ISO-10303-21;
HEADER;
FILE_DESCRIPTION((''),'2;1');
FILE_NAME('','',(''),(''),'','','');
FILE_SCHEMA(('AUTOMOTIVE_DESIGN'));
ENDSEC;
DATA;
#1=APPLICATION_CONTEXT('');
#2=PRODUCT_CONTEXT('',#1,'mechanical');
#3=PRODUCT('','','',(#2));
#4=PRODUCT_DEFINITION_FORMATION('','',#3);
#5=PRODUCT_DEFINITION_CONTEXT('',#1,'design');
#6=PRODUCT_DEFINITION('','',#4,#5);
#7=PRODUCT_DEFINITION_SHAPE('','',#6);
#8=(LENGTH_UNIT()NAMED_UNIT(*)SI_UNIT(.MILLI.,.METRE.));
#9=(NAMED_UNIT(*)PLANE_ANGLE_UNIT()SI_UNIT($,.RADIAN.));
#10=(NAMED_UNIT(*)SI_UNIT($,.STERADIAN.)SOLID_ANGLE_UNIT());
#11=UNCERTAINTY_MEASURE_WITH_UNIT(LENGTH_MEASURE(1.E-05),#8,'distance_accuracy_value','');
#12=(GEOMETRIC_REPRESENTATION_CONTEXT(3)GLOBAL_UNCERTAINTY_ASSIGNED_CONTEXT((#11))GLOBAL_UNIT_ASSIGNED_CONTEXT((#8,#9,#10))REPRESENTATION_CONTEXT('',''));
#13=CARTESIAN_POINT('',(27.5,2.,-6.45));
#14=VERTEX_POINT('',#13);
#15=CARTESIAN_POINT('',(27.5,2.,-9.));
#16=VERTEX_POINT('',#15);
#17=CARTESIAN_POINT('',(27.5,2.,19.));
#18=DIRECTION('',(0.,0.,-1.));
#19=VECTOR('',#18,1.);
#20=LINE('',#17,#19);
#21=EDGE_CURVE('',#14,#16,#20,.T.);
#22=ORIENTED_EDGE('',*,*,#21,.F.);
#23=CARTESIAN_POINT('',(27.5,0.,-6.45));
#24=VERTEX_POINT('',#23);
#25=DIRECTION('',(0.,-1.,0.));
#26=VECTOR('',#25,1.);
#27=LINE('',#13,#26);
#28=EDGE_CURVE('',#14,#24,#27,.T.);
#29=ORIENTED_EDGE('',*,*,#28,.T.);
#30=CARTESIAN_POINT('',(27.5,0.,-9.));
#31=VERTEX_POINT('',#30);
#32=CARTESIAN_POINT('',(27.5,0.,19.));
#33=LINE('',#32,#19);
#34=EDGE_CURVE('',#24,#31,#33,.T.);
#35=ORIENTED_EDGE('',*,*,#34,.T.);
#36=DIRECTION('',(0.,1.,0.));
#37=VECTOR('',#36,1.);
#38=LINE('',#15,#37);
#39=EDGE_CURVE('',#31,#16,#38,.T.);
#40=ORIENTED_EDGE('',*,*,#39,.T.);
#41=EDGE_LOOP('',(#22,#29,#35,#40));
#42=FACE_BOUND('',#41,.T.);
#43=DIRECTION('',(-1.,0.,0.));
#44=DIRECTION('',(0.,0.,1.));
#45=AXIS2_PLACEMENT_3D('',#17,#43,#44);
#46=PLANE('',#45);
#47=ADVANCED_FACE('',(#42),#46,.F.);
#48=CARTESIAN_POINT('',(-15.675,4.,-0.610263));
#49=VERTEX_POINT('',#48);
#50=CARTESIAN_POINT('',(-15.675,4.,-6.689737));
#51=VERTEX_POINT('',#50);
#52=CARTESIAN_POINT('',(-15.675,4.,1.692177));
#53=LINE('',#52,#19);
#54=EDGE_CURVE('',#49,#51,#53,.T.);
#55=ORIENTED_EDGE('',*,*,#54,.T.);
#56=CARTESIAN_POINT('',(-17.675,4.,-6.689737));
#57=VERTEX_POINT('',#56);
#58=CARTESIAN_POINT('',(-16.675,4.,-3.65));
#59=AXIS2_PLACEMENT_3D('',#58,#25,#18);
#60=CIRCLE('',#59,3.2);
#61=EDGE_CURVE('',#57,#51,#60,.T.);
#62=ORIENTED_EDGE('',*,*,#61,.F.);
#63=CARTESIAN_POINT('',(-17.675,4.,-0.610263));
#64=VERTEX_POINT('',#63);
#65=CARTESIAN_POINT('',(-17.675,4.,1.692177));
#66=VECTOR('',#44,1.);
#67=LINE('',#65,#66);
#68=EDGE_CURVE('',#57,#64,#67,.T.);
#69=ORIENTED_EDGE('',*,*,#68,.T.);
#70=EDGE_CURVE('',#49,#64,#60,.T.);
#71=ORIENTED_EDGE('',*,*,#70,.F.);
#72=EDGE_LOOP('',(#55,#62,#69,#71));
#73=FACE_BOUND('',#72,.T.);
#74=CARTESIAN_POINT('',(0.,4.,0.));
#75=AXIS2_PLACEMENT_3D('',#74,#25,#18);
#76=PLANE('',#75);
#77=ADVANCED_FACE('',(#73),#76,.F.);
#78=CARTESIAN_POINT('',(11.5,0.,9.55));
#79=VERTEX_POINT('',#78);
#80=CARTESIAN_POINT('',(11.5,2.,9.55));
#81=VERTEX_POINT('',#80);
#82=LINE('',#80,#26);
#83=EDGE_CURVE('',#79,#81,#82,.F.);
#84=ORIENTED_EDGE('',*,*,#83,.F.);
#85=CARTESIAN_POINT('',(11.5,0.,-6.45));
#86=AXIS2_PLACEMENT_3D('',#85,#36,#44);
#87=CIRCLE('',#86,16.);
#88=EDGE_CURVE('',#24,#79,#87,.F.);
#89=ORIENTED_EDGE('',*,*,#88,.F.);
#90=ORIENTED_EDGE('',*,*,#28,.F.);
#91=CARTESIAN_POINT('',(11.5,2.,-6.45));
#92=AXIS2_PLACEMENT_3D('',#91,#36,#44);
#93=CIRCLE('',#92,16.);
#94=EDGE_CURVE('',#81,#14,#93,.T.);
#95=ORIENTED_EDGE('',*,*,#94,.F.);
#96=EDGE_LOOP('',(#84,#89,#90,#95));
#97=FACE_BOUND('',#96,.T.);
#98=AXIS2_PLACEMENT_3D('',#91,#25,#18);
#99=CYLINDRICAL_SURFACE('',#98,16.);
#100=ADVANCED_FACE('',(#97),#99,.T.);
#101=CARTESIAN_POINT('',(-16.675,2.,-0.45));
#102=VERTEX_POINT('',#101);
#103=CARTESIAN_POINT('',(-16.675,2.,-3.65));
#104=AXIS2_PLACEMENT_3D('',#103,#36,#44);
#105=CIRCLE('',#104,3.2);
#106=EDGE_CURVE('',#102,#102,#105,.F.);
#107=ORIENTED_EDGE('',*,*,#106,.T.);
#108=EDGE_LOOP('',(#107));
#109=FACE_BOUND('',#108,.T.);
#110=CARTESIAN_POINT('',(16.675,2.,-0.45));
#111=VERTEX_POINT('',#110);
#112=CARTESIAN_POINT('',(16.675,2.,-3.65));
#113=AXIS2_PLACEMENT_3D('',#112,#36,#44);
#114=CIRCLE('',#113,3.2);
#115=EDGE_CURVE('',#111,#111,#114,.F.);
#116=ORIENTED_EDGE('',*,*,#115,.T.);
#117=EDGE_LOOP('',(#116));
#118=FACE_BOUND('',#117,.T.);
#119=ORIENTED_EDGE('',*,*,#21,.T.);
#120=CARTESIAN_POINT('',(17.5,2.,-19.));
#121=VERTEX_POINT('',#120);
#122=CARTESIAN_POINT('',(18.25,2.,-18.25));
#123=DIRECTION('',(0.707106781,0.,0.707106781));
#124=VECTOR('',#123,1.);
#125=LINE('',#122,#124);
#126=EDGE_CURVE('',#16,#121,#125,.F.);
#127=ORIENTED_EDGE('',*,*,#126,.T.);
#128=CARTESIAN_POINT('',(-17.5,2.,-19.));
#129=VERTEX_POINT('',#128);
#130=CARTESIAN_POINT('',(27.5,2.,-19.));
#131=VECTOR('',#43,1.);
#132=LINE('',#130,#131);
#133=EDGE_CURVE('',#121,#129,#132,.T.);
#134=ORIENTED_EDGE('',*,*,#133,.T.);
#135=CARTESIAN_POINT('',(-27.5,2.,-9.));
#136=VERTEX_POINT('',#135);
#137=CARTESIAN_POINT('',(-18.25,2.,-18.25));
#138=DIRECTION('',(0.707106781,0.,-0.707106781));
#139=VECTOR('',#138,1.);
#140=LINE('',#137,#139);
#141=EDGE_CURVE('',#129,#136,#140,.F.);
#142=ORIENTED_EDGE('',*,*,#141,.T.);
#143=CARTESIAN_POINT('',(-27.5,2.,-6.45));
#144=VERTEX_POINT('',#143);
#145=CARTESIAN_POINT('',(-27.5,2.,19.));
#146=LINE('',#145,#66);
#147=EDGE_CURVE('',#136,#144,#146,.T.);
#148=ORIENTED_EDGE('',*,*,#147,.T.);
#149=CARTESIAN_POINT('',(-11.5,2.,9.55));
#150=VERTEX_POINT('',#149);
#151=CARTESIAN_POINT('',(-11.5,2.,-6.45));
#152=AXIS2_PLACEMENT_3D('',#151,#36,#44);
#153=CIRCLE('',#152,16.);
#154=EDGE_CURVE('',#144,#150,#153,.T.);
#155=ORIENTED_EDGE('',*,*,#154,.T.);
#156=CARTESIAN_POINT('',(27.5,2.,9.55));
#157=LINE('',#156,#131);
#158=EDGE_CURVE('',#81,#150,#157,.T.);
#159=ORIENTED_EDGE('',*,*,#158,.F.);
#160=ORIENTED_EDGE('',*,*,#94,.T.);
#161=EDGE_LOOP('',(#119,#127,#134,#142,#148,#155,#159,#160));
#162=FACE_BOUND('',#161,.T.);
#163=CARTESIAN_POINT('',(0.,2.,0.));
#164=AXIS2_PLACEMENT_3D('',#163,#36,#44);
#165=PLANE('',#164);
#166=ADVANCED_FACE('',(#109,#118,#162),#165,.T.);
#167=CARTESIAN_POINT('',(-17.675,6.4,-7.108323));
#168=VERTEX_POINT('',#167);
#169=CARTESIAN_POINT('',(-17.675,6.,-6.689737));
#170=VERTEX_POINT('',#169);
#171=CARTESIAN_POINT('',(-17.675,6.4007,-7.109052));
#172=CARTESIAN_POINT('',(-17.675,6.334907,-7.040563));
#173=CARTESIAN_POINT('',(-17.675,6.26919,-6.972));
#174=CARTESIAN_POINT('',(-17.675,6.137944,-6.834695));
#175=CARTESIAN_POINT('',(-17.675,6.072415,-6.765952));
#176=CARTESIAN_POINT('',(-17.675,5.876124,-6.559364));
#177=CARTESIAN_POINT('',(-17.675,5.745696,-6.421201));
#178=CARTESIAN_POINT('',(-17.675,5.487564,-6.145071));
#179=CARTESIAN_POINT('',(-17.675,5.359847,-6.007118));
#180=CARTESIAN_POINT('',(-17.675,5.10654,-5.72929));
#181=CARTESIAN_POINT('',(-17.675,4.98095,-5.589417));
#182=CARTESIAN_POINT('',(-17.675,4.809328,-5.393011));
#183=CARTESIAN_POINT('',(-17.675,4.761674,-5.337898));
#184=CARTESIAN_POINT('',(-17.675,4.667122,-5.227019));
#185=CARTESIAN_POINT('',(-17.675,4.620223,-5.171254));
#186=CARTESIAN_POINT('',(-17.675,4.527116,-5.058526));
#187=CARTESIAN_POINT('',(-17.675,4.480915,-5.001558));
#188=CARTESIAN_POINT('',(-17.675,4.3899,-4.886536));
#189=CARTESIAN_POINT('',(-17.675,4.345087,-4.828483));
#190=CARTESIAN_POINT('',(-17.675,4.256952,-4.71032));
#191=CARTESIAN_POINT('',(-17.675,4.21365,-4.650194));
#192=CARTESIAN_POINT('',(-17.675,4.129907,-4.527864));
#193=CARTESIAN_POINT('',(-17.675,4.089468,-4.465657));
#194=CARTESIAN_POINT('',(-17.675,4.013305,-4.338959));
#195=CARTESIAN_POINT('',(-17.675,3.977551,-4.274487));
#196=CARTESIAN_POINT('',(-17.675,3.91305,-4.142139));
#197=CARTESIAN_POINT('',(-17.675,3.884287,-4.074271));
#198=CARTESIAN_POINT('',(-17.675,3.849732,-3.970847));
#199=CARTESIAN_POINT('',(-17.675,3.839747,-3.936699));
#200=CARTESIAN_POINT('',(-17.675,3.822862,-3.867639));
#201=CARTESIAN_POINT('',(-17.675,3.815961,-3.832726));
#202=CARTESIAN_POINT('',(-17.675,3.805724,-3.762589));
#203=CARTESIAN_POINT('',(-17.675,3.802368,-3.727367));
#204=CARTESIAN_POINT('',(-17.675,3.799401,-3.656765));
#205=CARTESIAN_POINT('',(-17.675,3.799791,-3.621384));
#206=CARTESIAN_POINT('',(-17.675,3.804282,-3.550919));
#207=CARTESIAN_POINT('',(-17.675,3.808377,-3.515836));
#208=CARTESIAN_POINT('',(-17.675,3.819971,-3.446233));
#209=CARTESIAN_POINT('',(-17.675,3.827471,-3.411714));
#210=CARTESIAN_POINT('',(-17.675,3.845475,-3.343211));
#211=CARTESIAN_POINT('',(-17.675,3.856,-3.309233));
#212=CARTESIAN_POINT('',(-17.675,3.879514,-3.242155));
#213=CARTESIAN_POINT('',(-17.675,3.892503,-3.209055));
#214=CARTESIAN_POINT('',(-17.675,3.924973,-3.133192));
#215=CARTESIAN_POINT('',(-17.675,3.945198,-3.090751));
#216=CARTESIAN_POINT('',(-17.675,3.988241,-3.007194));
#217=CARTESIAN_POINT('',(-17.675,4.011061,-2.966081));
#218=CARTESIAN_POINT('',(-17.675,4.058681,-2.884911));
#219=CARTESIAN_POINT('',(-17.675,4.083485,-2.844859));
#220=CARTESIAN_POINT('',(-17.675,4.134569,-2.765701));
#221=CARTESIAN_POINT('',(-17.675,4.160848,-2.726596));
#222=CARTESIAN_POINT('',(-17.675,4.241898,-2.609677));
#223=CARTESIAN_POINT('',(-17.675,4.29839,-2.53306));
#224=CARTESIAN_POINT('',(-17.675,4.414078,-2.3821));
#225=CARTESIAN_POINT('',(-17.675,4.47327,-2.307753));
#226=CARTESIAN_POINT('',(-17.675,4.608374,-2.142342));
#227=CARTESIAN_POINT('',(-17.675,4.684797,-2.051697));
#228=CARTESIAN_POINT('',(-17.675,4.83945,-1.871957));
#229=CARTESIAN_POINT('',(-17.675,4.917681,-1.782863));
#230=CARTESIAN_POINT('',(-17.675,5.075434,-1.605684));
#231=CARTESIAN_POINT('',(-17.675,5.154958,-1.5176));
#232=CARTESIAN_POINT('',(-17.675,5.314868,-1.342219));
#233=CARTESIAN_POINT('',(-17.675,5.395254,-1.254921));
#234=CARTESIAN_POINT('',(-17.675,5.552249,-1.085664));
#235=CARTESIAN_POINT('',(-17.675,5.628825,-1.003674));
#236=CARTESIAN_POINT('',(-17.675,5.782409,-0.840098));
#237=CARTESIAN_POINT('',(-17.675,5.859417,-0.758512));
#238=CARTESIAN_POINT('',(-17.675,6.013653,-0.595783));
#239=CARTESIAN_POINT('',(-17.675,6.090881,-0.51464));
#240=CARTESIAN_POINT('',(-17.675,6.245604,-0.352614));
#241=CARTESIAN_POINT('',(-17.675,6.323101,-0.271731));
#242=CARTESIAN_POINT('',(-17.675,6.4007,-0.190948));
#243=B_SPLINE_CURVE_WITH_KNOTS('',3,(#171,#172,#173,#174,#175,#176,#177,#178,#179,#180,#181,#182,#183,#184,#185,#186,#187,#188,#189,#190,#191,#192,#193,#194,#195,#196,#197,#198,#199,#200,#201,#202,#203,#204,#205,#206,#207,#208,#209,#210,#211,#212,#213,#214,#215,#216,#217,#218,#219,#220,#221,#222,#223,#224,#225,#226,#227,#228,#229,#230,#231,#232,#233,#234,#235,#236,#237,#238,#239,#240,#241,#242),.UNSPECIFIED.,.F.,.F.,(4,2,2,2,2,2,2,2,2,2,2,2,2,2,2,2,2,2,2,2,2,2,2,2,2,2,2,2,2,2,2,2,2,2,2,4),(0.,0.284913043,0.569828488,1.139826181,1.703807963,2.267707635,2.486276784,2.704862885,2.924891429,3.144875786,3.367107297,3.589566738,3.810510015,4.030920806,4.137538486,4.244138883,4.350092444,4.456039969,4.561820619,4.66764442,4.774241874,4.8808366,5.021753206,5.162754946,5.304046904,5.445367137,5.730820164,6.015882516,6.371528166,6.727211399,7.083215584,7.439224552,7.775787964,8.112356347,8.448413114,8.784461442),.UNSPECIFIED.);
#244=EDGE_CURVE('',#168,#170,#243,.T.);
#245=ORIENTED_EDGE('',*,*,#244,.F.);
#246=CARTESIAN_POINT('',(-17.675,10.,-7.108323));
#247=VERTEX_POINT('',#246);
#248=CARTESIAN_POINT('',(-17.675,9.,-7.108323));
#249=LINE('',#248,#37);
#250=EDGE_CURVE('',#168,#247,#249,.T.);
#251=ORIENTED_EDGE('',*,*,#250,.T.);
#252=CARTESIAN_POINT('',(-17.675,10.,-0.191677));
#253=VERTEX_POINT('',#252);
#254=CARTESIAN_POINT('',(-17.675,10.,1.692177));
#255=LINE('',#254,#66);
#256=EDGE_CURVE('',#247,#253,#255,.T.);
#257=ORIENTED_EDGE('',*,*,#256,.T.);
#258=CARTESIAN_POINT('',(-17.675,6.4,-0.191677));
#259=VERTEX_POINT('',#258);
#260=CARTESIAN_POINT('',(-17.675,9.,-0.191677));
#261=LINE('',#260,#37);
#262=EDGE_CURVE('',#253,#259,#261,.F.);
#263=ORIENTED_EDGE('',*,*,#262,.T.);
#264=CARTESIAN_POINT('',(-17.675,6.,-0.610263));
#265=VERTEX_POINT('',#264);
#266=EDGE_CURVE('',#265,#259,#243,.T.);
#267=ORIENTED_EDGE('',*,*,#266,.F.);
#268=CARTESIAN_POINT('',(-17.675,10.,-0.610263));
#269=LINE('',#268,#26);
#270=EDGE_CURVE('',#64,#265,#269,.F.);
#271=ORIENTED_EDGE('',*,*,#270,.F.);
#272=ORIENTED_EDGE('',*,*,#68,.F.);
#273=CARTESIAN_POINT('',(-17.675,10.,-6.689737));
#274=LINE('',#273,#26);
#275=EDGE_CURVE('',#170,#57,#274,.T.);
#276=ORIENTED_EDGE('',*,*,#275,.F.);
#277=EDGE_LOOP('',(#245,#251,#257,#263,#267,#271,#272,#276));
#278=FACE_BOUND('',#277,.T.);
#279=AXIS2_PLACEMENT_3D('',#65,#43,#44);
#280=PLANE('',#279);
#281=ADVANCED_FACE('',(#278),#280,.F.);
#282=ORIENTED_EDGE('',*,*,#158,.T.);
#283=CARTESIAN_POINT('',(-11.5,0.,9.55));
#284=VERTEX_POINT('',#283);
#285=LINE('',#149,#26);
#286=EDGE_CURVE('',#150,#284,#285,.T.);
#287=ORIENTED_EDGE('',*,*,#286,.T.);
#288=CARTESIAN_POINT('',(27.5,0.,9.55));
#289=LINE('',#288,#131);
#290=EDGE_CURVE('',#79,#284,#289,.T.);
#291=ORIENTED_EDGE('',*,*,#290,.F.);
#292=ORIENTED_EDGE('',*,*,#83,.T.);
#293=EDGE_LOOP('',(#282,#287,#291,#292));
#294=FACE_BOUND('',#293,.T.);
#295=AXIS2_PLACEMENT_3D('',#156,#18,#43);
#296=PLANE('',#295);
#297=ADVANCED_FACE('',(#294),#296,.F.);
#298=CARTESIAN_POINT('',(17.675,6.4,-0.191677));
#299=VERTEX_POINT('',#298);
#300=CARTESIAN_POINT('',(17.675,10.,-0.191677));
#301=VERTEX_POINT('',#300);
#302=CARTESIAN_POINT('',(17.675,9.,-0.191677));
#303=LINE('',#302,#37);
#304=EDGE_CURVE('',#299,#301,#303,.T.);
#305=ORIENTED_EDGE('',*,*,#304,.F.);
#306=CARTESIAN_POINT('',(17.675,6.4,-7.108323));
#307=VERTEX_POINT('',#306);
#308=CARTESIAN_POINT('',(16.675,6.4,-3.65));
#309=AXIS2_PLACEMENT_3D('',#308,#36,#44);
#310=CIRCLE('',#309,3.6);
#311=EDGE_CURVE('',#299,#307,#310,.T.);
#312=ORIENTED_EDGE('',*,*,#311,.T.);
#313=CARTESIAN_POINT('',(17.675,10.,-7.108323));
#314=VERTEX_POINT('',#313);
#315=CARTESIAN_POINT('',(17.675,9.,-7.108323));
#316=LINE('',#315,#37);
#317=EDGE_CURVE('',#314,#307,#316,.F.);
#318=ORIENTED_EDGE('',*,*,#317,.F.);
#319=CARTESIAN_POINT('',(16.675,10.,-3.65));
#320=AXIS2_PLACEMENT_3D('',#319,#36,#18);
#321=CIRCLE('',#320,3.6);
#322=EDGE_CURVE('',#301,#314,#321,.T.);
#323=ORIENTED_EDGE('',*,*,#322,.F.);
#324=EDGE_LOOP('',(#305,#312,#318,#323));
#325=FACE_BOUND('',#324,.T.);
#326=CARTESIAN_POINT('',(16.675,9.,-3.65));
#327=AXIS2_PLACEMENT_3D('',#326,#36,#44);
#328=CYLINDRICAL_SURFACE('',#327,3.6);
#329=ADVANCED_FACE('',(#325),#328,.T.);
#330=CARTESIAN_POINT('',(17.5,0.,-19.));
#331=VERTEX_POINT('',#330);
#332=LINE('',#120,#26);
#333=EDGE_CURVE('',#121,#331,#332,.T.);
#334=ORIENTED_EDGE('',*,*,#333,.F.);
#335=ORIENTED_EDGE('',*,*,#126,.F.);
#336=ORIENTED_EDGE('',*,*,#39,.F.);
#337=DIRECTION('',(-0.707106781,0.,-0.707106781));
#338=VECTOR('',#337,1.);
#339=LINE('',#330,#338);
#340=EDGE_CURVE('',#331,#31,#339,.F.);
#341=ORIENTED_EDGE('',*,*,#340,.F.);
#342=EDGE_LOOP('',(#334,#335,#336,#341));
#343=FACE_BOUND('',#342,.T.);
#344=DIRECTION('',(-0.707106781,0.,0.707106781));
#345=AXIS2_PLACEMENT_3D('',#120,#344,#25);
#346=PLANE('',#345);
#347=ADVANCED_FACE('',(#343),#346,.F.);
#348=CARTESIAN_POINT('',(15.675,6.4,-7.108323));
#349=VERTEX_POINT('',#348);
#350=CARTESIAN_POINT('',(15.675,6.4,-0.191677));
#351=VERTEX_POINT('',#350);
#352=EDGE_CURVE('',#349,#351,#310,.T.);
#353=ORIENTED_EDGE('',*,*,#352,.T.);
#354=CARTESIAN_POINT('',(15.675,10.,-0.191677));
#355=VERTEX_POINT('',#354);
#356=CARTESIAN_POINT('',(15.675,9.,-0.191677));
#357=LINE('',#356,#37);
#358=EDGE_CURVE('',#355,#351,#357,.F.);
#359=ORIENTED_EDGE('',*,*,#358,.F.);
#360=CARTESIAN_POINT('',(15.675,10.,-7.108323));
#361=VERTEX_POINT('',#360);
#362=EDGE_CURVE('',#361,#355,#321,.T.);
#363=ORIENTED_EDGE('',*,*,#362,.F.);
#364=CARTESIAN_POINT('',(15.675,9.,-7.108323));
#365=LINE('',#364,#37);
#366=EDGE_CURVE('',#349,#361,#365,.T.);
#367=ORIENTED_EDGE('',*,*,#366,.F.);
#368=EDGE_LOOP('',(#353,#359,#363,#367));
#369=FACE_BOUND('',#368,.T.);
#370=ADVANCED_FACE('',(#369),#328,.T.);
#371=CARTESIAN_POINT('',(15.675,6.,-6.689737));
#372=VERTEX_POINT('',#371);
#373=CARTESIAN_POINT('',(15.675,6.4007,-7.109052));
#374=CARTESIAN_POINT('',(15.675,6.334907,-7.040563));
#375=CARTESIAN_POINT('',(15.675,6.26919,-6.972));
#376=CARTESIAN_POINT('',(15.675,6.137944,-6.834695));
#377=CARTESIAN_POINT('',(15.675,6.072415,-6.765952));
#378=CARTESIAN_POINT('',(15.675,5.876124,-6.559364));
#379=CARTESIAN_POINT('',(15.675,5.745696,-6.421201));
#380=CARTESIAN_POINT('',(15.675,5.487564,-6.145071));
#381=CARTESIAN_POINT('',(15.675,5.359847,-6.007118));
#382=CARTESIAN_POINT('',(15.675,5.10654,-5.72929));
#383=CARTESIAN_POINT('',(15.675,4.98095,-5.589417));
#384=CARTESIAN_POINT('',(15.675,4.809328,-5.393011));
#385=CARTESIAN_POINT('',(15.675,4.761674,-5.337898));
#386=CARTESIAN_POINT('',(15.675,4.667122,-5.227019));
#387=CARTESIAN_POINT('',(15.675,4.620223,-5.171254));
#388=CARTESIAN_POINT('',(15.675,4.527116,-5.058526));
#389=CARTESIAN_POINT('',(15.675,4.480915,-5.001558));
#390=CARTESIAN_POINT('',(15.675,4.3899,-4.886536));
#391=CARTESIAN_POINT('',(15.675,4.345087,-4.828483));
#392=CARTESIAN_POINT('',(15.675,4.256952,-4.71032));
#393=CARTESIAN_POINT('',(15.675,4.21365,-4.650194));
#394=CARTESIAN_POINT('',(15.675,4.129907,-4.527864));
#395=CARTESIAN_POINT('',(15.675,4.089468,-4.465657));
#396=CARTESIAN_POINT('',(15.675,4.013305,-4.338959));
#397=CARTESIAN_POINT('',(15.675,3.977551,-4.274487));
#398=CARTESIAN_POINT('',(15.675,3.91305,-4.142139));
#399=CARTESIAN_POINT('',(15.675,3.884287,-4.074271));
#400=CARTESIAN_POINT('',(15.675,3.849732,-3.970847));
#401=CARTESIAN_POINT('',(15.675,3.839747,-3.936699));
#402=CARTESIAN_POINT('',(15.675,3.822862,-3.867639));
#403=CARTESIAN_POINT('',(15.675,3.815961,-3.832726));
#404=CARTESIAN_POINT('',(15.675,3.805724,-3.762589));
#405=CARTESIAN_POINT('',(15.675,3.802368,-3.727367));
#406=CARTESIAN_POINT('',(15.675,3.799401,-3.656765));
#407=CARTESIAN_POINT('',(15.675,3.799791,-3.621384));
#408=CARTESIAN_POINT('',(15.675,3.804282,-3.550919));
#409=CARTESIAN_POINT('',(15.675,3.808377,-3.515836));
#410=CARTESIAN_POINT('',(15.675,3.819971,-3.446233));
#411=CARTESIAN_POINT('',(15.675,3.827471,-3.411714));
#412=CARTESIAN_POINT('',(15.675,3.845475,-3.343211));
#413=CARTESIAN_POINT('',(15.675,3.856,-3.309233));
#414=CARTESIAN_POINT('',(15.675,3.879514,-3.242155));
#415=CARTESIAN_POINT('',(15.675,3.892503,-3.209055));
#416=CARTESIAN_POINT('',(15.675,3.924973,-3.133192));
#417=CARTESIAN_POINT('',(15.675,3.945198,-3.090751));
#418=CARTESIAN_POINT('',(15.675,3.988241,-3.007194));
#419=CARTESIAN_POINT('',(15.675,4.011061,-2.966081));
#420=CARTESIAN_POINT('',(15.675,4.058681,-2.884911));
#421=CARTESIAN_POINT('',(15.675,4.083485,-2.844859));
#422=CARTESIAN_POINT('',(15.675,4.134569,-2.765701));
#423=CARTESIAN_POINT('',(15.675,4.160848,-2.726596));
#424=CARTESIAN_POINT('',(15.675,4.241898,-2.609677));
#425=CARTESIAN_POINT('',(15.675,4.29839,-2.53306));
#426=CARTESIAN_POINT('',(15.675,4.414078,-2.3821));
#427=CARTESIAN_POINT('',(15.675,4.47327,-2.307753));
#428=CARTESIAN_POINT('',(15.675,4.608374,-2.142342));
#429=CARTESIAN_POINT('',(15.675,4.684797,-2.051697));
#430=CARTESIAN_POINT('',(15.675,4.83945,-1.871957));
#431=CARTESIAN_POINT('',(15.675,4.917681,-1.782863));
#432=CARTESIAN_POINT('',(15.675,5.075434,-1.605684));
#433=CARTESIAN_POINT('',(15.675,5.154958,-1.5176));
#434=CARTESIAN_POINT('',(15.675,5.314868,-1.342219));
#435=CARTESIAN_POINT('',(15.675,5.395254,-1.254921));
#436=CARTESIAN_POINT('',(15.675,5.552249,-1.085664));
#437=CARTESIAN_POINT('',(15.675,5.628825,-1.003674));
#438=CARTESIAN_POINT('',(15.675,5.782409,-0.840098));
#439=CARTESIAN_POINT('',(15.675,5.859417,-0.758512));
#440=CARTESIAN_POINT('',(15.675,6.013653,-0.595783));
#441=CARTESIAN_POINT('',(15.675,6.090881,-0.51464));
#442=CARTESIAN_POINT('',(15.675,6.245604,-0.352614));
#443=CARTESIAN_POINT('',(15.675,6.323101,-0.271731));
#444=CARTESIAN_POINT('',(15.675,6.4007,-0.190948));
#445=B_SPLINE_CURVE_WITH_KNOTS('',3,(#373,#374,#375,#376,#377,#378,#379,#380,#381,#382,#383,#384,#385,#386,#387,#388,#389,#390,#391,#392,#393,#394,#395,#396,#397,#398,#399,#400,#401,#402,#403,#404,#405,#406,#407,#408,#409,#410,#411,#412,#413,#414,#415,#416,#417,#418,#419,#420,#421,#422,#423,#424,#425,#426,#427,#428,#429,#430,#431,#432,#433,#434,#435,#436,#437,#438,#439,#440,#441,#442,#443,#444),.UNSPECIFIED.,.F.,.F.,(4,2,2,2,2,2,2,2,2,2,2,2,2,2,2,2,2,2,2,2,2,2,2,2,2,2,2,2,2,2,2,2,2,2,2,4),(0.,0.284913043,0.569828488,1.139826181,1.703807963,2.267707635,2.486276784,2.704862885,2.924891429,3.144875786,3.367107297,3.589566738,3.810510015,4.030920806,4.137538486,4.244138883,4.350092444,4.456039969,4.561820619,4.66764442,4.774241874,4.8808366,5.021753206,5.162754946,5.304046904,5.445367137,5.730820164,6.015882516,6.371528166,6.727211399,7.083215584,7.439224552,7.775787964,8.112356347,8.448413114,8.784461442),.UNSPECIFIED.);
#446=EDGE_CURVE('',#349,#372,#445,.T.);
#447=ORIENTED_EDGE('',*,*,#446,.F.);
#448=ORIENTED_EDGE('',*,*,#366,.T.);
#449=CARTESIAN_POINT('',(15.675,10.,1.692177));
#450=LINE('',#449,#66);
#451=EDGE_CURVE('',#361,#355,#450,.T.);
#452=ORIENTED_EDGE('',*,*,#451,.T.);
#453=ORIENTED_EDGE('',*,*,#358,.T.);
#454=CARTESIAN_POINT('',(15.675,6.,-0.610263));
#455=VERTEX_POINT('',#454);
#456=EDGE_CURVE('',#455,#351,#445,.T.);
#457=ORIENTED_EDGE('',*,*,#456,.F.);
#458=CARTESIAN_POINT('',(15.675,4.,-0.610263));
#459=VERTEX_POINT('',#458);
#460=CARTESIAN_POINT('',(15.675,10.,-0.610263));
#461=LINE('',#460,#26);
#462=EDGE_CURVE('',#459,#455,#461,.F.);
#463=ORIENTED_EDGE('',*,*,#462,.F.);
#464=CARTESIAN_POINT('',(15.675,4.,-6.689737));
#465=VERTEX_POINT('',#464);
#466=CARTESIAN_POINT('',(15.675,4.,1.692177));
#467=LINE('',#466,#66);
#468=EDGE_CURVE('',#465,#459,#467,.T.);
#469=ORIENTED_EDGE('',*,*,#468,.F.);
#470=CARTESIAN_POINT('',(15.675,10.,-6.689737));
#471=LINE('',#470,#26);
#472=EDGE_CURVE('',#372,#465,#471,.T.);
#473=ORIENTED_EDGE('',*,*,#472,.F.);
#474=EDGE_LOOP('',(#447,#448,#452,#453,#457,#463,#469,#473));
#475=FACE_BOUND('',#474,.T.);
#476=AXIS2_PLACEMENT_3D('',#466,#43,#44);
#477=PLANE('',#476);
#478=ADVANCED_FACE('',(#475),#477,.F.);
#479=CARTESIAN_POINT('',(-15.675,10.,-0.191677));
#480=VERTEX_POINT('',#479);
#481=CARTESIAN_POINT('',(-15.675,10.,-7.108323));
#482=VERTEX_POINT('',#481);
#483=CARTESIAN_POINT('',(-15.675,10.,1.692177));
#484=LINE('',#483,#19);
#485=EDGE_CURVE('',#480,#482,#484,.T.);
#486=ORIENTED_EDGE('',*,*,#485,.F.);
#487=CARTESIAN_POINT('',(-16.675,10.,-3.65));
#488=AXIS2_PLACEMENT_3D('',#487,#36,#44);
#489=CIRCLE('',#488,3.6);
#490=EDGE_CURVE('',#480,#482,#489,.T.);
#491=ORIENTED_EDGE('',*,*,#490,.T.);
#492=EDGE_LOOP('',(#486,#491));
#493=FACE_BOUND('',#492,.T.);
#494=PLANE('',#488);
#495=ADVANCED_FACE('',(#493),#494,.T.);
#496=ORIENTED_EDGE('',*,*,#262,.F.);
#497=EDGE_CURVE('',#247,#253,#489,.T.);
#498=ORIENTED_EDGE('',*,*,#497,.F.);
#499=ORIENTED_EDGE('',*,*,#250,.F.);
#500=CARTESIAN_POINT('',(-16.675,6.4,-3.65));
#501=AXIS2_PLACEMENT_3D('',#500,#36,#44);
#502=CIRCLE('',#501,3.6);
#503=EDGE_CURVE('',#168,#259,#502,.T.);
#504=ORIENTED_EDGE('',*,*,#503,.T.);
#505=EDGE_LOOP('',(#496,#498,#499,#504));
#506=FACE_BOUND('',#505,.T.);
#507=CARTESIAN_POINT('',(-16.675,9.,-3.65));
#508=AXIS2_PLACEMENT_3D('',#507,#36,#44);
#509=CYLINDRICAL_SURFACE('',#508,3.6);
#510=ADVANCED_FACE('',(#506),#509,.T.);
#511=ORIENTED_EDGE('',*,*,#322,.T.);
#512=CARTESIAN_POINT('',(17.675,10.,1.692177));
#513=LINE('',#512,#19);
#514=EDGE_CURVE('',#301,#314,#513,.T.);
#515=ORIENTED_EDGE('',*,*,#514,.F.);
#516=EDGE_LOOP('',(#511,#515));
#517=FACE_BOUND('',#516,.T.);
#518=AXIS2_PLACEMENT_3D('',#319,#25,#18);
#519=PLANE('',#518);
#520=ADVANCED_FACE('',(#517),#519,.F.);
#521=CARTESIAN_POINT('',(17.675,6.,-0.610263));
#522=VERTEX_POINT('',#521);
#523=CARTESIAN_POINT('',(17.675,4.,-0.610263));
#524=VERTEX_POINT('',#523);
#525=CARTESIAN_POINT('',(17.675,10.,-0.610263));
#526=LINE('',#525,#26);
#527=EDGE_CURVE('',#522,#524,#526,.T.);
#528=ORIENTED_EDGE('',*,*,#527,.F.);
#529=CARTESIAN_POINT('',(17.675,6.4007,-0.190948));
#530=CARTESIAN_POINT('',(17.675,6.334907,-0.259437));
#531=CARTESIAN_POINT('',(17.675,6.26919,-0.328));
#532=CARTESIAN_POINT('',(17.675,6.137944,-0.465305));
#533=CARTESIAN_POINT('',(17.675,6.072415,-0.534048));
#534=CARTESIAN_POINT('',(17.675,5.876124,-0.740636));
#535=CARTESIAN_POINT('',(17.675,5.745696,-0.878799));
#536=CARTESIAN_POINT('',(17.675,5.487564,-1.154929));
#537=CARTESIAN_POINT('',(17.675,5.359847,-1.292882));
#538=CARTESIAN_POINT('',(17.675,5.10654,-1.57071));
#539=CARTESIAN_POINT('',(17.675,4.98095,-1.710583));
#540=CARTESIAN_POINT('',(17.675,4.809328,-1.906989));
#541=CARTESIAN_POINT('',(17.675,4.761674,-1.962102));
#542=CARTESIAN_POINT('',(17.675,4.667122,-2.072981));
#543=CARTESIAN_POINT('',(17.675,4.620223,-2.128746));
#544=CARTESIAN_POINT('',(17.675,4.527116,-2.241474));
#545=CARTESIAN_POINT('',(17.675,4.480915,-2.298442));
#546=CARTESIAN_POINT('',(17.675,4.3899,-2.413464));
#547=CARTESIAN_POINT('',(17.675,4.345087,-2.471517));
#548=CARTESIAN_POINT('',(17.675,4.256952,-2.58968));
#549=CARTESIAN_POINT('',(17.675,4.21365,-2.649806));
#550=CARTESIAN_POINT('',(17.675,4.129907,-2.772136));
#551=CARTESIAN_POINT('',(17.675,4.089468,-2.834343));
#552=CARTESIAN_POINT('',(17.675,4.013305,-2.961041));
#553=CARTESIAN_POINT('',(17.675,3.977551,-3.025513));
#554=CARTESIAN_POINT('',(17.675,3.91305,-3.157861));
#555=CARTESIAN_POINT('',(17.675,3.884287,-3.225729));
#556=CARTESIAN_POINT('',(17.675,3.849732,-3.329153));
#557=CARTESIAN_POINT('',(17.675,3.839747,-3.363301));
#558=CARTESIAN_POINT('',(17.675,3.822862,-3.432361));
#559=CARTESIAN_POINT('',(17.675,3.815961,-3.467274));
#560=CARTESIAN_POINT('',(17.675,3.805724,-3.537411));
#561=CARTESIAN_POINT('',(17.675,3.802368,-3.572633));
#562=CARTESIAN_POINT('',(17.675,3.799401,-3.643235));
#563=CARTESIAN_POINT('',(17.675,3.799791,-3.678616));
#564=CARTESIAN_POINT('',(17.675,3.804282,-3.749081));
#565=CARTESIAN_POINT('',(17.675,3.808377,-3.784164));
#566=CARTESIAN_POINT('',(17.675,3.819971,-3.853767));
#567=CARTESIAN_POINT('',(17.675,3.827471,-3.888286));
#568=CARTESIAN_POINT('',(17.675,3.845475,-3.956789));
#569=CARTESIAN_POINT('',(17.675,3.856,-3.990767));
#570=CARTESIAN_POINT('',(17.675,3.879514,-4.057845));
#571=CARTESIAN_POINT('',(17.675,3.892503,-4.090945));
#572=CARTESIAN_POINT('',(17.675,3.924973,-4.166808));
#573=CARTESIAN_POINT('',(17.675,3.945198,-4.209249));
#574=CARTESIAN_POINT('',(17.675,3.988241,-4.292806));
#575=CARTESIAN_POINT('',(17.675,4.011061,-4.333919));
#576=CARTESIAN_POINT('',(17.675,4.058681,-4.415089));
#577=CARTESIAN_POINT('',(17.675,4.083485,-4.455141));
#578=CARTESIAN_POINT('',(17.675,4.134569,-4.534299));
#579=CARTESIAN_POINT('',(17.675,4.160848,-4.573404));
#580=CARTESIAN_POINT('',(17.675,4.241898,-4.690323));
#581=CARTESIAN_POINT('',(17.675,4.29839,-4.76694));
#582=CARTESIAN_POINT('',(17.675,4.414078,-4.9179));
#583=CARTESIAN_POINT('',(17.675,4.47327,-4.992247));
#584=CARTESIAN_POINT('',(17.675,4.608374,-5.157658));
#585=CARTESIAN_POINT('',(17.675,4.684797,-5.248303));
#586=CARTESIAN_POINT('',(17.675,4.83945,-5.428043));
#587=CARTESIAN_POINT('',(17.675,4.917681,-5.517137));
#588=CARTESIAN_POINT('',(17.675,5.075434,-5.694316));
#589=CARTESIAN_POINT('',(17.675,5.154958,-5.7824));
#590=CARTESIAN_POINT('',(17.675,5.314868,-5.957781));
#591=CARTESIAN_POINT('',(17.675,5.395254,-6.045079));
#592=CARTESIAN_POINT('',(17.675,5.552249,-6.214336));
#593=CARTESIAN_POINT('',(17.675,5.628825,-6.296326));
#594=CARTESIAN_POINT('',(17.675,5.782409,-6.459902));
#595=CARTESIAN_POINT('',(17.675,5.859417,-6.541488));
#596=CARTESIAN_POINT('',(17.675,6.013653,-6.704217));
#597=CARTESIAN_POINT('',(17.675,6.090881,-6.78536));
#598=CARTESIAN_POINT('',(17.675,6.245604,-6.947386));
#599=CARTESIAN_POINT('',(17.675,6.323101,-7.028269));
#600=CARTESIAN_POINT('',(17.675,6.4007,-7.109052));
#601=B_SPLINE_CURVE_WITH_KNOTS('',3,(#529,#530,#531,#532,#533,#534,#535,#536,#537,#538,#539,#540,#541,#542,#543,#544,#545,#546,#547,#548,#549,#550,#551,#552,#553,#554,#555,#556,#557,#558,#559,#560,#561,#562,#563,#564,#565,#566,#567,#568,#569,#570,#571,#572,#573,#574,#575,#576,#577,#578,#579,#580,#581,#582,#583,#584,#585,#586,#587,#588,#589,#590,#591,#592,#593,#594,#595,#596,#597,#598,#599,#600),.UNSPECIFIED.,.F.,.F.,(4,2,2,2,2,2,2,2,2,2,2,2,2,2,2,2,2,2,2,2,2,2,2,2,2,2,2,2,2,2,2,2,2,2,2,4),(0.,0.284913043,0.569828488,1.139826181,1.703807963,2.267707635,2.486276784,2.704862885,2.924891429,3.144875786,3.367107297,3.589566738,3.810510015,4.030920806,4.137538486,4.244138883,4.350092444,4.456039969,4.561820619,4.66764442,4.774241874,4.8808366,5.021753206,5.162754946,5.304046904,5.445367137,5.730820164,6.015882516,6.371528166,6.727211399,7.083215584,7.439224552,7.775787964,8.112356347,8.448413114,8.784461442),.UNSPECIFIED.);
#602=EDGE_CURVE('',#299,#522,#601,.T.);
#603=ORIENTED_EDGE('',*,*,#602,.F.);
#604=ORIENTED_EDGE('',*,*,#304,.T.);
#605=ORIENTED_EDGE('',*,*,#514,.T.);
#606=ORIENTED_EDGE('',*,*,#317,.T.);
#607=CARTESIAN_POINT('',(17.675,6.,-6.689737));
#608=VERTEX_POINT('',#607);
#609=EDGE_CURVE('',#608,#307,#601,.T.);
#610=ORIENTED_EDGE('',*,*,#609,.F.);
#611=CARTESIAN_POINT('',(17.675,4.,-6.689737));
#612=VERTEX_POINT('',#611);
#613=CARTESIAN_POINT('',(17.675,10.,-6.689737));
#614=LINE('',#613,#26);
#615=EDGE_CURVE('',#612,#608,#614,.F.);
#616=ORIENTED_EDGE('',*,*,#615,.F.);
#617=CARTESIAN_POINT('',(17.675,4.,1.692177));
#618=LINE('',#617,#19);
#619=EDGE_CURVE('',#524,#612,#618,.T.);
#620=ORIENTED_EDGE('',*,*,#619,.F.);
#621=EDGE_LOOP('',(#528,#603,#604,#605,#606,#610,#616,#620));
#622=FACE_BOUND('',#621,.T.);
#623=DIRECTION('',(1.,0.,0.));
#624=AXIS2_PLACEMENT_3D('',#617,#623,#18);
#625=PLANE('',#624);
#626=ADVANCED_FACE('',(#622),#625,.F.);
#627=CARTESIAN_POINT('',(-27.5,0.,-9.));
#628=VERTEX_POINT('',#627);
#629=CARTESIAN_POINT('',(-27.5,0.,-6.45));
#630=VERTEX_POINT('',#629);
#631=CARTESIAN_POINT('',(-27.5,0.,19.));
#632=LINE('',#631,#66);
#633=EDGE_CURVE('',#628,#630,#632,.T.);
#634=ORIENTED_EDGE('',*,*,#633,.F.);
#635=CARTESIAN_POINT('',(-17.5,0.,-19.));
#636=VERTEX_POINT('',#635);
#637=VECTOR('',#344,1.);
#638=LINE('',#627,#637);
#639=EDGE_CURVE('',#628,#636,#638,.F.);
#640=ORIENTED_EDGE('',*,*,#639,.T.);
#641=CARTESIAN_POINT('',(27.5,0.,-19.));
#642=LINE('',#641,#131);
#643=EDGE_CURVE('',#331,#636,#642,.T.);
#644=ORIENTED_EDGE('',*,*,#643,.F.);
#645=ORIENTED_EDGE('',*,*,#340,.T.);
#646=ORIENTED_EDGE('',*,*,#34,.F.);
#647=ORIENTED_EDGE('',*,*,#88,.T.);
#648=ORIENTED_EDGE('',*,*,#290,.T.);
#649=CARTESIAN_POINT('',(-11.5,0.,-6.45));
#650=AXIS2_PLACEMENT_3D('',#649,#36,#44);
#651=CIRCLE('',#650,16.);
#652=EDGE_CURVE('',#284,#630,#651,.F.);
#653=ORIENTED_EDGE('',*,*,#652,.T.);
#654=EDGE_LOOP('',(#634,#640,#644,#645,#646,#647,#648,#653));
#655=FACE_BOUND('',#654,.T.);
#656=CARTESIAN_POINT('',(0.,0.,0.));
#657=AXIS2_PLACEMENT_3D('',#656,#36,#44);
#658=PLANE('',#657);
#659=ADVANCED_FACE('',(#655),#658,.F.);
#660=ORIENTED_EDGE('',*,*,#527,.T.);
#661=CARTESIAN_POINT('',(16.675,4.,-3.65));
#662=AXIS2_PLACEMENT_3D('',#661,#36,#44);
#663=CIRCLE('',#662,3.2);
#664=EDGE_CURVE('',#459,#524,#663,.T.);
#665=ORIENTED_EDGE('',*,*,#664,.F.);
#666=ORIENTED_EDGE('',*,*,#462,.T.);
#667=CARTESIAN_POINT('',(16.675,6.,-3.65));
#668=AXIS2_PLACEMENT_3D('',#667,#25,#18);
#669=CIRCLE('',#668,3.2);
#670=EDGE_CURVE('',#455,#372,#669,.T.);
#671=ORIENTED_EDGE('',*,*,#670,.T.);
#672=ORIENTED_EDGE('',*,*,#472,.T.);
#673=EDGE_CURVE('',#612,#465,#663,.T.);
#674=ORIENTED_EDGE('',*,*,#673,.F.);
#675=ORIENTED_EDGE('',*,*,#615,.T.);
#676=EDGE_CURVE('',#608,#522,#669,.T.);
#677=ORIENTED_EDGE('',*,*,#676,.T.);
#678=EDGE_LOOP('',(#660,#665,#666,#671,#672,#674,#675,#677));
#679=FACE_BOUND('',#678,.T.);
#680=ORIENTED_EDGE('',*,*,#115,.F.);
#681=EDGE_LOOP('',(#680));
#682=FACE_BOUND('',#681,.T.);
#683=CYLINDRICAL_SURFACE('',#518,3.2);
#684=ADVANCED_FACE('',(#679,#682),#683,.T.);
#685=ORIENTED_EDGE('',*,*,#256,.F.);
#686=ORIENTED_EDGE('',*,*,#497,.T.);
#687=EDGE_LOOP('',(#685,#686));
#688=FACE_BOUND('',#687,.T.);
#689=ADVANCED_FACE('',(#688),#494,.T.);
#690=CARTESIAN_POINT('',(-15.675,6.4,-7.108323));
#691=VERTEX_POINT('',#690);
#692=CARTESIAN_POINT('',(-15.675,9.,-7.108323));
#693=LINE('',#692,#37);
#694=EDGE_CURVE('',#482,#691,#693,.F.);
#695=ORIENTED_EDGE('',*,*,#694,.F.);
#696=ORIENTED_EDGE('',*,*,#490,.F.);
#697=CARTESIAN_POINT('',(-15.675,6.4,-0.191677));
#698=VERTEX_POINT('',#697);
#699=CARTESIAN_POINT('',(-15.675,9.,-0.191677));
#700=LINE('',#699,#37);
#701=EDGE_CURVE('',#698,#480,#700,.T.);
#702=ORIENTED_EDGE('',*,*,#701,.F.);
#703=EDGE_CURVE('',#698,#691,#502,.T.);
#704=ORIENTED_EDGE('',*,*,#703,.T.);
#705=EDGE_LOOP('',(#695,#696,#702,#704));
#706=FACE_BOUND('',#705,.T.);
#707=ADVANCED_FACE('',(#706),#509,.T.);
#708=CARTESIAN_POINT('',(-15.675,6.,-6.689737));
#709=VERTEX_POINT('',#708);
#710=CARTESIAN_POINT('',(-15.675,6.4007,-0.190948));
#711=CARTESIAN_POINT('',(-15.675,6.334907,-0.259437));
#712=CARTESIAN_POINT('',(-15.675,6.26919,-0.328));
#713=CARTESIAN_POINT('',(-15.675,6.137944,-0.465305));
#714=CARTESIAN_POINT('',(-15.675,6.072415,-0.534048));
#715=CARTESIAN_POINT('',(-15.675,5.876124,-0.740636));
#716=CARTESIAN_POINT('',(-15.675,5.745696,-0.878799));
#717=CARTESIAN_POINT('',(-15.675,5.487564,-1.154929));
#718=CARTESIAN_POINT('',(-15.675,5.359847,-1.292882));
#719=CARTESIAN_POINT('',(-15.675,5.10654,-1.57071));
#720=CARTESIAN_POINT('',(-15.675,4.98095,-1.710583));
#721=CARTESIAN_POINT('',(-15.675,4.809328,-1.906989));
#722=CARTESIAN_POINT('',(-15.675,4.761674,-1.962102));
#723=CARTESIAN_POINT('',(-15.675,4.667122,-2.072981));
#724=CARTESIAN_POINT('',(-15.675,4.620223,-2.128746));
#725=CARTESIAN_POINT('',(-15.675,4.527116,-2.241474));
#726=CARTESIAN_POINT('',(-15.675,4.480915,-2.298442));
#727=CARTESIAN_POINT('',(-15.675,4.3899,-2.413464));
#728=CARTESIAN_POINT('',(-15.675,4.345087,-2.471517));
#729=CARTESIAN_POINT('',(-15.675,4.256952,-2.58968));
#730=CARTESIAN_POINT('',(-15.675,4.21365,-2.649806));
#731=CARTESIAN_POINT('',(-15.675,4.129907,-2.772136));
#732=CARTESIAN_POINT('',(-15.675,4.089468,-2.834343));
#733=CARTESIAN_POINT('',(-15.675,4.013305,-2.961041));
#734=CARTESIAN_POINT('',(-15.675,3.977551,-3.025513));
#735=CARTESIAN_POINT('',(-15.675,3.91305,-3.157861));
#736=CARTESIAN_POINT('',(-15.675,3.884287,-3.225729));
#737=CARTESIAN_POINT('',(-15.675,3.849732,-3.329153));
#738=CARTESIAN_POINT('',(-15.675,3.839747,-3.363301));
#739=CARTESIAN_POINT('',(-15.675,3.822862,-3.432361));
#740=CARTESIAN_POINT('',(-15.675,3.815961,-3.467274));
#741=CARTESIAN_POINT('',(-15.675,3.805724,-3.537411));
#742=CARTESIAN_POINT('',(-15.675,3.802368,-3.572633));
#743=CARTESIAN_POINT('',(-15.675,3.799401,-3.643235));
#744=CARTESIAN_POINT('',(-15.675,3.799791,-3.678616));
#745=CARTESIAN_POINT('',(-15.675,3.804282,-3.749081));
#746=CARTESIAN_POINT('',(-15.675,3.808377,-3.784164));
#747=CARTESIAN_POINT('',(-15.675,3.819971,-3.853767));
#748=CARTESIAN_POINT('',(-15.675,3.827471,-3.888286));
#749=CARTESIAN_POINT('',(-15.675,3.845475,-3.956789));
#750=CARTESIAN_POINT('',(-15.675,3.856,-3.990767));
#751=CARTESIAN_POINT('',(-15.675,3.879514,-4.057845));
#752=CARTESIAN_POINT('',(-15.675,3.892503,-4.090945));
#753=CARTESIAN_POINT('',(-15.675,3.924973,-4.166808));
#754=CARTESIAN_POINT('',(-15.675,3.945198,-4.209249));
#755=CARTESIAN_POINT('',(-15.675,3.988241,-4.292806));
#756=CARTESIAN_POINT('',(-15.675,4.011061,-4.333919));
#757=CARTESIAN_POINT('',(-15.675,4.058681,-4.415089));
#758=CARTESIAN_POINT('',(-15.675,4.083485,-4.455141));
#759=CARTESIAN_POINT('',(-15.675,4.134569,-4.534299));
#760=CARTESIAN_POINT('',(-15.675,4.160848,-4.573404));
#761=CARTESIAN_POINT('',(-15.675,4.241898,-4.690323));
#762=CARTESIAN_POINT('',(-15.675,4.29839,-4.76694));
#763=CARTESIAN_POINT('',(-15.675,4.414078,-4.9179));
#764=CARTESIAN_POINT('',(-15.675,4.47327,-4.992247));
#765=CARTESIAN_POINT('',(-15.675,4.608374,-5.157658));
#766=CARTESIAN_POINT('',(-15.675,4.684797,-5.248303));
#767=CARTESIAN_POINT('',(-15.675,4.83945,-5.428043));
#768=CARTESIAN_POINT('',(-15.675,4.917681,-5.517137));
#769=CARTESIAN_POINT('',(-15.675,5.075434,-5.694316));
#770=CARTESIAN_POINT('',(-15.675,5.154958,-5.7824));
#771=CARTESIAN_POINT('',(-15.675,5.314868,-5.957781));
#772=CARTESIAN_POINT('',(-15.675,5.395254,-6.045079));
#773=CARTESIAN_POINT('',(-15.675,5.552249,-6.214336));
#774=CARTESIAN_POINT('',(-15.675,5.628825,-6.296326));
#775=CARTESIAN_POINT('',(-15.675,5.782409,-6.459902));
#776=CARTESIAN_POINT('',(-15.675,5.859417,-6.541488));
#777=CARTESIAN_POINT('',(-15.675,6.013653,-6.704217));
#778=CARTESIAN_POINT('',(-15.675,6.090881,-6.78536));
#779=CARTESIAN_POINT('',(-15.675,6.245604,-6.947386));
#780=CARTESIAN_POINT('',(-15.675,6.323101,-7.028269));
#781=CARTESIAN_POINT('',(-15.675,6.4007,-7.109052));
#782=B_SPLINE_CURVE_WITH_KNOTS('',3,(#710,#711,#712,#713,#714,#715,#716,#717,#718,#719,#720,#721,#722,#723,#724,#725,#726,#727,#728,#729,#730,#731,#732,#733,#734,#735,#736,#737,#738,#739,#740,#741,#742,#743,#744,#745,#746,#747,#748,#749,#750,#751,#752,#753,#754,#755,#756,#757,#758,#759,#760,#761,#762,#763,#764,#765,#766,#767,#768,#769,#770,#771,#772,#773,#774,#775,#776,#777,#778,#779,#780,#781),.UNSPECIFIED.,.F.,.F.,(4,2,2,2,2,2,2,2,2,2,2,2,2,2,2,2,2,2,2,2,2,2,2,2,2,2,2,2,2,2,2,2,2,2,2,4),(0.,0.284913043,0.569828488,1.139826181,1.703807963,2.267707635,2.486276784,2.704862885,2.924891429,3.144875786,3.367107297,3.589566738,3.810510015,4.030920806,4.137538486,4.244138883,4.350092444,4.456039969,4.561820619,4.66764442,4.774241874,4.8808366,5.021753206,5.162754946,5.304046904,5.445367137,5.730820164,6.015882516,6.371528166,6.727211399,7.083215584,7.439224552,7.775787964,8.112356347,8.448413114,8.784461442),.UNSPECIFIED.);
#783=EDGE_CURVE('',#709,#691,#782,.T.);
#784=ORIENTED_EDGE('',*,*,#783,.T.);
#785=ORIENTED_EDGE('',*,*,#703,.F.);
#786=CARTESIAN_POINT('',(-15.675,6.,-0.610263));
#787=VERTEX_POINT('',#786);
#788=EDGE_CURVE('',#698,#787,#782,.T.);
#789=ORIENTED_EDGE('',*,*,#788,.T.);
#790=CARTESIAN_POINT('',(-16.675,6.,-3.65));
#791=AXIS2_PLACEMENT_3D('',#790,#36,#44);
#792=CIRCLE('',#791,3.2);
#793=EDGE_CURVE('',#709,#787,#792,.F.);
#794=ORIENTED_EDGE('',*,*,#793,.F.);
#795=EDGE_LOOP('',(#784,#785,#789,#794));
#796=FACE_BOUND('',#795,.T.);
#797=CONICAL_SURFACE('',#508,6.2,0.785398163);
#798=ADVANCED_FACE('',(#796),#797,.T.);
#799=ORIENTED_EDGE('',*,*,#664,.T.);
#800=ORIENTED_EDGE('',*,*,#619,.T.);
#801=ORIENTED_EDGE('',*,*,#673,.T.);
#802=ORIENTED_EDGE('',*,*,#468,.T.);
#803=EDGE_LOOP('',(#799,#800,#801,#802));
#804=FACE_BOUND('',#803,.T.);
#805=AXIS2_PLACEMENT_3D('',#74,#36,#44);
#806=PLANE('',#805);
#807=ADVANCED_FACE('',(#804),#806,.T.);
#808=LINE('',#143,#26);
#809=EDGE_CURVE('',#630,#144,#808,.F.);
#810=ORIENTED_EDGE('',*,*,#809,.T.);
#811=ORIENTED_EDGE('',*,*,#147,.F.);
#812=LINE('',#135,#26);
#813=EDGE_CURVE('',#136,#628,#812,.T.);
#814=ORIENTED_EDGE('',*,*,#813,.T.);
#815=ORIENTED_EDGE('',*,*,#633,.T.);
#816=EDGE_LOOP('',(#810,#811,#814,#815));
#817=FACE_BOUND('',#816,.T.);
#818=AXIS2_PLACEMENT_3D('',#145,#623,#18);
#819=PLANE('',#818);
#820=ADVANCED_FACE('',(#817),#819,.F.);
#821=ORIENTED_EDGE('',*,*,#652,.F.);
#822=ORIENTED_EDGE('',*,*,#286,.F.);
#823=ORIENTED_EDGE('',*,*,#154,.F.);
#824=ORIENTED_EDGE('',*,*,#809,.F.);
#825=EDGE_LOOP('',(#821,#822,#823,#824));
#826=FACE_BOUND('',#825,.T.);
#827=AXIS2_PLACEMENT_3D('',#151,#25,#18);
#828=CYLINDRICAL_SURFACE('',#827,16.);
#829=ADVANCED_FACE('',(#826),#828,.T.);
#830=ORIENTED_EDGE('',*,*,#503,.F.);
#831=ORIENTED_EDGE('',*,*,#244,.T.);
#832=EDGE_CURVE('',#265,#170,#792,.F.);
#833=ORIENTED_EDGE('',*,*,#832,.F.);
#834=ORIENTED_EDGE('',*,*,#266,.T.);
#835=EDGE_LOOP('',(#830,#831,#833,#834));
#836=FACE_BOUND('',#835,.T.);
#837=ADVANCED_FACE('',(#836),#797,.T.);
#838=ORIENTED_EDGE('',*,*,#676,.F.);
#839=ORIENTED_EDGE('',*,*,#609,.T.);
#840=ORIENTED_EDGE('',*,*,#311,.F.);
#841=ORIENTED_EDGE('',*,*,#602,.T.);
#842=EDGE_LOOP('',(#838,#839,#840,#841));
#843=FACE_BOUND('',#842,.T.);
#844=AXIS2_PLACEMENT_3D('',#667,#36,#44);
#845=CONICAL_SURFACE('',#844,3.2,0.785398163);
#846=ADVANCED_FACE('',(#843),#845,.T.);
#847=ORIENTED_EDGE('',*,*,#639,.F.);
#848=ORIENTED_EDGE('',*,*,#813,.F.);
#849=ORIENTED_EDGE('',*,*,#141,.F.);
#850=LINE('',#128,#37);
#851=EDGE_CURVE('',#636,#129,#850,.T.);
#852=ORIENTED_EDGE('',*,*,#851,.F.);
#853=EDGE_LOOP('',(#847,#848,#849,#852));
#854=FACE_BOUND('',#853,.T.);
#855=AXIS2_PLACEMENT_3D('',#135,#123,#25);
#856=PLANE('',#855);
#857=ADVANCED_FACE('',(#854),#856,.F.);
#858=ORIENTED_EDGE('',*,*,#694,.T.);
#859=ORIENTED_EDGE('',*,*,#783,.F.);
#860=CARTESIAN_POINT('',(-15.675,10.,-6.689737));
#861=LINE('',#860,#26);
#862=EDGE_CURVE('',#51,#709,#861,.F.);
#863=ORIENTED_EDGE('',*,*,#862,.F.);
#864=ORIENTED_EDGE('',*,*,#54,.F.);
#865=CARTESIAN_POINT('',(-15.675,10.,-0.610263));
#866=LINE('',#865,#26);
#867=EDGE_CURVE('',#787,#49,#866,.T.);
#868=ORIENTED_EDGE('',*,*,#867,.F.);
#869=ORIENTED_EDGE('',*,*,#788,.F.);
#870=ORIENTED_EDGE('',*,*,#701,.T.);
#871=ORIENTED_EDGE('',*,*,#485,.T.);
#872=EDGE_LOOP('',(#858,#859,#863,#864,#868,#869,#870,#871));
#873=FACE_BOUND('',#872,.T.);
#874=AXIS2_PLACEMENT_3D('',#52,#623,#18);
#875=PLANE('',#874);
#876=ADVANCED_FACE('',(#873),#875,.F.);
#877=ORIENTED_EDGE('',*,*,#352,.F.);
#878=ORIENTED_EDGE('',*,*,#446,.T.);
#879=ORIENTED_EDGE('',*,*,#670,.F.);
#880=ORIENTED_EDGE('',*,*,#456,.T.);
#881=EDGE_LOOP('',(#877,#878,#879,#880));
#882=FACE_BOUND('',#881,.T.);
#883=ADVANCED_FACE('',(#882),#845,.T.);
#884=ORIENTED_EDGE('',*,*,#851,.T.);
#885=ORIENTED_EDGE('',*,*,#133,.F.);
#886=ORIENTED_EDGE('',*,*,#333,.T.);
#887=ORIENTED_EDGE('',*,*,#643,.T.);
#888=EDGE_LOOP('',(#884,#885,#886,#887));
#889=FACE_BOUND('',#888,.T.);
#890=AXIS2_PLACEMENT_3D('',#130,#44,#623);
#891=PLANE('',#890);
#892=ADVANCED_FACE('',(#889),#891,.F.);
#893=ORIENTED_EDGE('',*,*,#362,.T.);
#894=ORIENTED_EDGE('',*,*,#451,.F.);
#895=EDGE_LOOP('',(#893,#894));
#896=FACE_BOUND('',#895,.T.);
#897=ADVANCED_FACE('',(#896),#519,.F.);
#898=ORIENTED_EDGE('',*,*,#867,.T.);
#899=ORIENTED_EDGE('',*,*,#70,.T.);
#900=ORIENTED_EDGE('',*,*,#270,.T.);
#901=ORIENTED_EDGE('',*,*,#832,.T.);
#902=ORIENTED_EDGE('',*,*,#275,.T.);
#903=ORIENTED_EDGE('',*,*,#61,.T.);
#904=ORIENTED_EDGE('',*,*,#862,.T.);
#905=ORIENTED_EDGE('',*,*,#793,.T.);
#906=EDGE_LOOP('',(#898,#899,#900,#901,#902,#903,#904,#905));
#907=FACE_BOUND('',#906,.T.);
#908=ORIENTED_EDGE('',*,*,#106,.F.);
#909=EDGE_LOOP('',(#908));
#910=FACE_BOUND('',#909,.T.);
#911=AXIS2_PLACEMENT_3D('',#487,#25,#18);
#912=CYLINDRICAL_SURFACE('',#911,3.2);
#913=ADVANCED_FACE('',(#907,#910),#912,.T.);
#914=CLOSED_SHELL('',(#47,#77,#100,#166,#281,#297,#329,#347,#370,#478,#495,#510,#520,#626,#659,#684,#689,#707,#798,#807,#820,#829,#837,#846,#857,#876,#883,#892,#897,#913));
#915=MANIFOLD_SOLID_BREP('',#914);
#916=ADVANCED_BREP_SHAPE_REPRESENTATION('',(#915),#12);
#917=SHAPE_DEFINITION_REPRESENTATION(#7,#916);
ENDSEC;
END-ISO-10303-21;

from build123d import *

# Parameters (mm, degrees)
SKETCH2_W               = 55
SKETCH2_H               = 38
BOSS_EXTRUDE1_DEPTH     = 2
SKETCH3_R               = 3.2
BOSS_EXTRUDE2_DEPTH     = 10
SKETCH4_R               = 3.6
BOSS_EXTRUDE3_DEPTH     = 1
CHAMFER1_SIZE           = 3
SKETCH5_W               = 2
SKETCH5_H               = 10.684354826
CUT_EXTRUDE1_DEPTH      = 6
CHAMFER2_SIZE           = 10
CUT_EXTRUDE2_DEPTH      = 35.889110049
CUT_EXTRUDE2_DEPTH_BACK = 35.889110049
SKETCH8_W               = 9.45
SKETCH8_H               = 2
FILLET2_R               = 16


with BuildPart() as part:
    # Sketch2 → Boss-Extrude1 (new body)
    with BuildSketch(Plane(origin=(0, 0, 0), x_dir=(1, 0, 0), z_dir=(0, 1, 0))):
        Rectangle(SKETCH2_W, SKETCH2_H)
    extrude(amount=BOSS_EXTRUDE1_DEPTH)

    # Sketch3 → Boss-Extrude2 (add)
    with BuildSketch(Plane(origin=(0, 0, 0), x_dir=(1, 0, 0), z_dir=(0, 1, 0))):
        with Locations(Location((-16.675, 3.65, 0), (0, 0, 270))):
            Circle(SKETCH3_R)
        with Locations(Location((16.675, 3.65, 0), (0, 0, 90))):
            Circle(SKETCH3_R)
    extrude(amount=BOSS_EXTRUDE2_DEPTH)

    # Sketch4 → Boss-Extrude3 (add)
    with BuildSketch(Plane(origin=(0, 10, 0), x_dir=(1, 0, 0), z_dir=(0, 1, 0))):
        with Locations(Location((-16.675, 3.65, 0), (0, 0, 270))):
            Circle(SKETCH4_R)
        with Locations(Location((16.675, 3.65, 0), (0, 0, 90))):
            Circle(SKETCH4_R)
    extrude(amount=-BOSS_EXTRUDE3_DEPTH)

    # Chamfer1
    # the kernel refuses this chamfer: 3 mm, written as the material it adds along each edge
    with BuildSketch(Plane(origin=(16.675, 9, -3.65), x_dir=(0, 0, -1), z_dir=(-1, 0, 0))) as chamfer1_piece_1_section:
        Polygon((3.2, CHAMFER1_SIZE), (3.2 + CHAMFER1_SIZE, 0), (3.2, 0), align=None)
    chamfer1_piece_1 = revolve(axis=Axis((16.675, 9, -3.65), (0, -1, 0)), mode=Mode.PRIVATE)
    chamfer1_piece_1 = chamfer1_piece_1 & Plane(origin=(16.675, 6.179265151, -3.65), x_dir=(0, 0, -1), z_dir=(0, 1, 0)) * Cylinder(3.6, 25, mode=Mode.PRIVATE)
    add(chamfer1_piece_1)
    with BuildSketch(Plane(origin=(-16.675, 9, -3.65), x_dir=(0, 0, 1), z_dir=(1, 0, 0))) as chamfer1_piece_2_section:
        Polygon((3.2, CHAMFER1_SIZE), (3.2 + CHAMFER1_SIZE, 0), (3.2, 0), align=None)
    chamfer1_piece_2 = revolve(axis=Axis((-16.675, 9, -3.65), (0, -1, 0)), mode=Mode.PRIVATE)
    chamfer1_piece_2 = chamfer1_piece_2 & Plane(origin=(-16.675, 6.179265151, -3.65), x_dir=(0, 0, 1), z_dir=(0, 1, 0)) * Cylinder(3.6, 25, mode=Mode.PRIVATE)
    add(chamfer1_piece_2)

    # Sketch5 → Cut-Extrude1 (cut)
    with BuildSketch(Plane(origin=(0, 10, 0), x_dir=(1, 0, 0), z_dir=(0, 1, 0))):
        with Locations((16.675, 3.65)):
            Rectangle(SKETCH5_W, SKETCH5_H)
        with Locations((-16.675, 3.65)):
            Rectangle(SKETCH5_W, SKETCH5_H)
    extrude(amount=-CUT_EXTRUDE1_DEPTH, mode=Mode.SUBTRACT)

    # Chamfer2
    chamfer2_edges = [part.edges().sort_by_distance(p)[0] for p in [
        (-27.5, 1, -19),
        (27.5, 1, -19),
    ]]
    chamfer(chamfer2_edges, length=CHAMFER2_SIZE)

    # Sketch8 → Cut-Extrude2 (cut, two sides: drawn at the far end of the back side and taken through both)
    with BuildSketch(Plane.ZY.offset(-CUT_EXTRUDE2_DEPTH_BACK)):
        with Locations((14.275, 1)):
            Rectangle(SKETCH8_W, SKETCH8_H)
    extrude(amount=CUT_EXTRUDE2_DEPTH + CUT_EXTRUDE2_DEPTH_BACK, mode=Mode.SUBTRACT)

    # Fillet2
    fillet2_edges = [part.edges().sort_by_distance(p)[0] for p in [
        (27.5, 1, 9.55),
        (-27.5, 1, 9.55),
    ]]
    fillet(fillet2_edges, radius=FILLET2_R)


solid = part.part
